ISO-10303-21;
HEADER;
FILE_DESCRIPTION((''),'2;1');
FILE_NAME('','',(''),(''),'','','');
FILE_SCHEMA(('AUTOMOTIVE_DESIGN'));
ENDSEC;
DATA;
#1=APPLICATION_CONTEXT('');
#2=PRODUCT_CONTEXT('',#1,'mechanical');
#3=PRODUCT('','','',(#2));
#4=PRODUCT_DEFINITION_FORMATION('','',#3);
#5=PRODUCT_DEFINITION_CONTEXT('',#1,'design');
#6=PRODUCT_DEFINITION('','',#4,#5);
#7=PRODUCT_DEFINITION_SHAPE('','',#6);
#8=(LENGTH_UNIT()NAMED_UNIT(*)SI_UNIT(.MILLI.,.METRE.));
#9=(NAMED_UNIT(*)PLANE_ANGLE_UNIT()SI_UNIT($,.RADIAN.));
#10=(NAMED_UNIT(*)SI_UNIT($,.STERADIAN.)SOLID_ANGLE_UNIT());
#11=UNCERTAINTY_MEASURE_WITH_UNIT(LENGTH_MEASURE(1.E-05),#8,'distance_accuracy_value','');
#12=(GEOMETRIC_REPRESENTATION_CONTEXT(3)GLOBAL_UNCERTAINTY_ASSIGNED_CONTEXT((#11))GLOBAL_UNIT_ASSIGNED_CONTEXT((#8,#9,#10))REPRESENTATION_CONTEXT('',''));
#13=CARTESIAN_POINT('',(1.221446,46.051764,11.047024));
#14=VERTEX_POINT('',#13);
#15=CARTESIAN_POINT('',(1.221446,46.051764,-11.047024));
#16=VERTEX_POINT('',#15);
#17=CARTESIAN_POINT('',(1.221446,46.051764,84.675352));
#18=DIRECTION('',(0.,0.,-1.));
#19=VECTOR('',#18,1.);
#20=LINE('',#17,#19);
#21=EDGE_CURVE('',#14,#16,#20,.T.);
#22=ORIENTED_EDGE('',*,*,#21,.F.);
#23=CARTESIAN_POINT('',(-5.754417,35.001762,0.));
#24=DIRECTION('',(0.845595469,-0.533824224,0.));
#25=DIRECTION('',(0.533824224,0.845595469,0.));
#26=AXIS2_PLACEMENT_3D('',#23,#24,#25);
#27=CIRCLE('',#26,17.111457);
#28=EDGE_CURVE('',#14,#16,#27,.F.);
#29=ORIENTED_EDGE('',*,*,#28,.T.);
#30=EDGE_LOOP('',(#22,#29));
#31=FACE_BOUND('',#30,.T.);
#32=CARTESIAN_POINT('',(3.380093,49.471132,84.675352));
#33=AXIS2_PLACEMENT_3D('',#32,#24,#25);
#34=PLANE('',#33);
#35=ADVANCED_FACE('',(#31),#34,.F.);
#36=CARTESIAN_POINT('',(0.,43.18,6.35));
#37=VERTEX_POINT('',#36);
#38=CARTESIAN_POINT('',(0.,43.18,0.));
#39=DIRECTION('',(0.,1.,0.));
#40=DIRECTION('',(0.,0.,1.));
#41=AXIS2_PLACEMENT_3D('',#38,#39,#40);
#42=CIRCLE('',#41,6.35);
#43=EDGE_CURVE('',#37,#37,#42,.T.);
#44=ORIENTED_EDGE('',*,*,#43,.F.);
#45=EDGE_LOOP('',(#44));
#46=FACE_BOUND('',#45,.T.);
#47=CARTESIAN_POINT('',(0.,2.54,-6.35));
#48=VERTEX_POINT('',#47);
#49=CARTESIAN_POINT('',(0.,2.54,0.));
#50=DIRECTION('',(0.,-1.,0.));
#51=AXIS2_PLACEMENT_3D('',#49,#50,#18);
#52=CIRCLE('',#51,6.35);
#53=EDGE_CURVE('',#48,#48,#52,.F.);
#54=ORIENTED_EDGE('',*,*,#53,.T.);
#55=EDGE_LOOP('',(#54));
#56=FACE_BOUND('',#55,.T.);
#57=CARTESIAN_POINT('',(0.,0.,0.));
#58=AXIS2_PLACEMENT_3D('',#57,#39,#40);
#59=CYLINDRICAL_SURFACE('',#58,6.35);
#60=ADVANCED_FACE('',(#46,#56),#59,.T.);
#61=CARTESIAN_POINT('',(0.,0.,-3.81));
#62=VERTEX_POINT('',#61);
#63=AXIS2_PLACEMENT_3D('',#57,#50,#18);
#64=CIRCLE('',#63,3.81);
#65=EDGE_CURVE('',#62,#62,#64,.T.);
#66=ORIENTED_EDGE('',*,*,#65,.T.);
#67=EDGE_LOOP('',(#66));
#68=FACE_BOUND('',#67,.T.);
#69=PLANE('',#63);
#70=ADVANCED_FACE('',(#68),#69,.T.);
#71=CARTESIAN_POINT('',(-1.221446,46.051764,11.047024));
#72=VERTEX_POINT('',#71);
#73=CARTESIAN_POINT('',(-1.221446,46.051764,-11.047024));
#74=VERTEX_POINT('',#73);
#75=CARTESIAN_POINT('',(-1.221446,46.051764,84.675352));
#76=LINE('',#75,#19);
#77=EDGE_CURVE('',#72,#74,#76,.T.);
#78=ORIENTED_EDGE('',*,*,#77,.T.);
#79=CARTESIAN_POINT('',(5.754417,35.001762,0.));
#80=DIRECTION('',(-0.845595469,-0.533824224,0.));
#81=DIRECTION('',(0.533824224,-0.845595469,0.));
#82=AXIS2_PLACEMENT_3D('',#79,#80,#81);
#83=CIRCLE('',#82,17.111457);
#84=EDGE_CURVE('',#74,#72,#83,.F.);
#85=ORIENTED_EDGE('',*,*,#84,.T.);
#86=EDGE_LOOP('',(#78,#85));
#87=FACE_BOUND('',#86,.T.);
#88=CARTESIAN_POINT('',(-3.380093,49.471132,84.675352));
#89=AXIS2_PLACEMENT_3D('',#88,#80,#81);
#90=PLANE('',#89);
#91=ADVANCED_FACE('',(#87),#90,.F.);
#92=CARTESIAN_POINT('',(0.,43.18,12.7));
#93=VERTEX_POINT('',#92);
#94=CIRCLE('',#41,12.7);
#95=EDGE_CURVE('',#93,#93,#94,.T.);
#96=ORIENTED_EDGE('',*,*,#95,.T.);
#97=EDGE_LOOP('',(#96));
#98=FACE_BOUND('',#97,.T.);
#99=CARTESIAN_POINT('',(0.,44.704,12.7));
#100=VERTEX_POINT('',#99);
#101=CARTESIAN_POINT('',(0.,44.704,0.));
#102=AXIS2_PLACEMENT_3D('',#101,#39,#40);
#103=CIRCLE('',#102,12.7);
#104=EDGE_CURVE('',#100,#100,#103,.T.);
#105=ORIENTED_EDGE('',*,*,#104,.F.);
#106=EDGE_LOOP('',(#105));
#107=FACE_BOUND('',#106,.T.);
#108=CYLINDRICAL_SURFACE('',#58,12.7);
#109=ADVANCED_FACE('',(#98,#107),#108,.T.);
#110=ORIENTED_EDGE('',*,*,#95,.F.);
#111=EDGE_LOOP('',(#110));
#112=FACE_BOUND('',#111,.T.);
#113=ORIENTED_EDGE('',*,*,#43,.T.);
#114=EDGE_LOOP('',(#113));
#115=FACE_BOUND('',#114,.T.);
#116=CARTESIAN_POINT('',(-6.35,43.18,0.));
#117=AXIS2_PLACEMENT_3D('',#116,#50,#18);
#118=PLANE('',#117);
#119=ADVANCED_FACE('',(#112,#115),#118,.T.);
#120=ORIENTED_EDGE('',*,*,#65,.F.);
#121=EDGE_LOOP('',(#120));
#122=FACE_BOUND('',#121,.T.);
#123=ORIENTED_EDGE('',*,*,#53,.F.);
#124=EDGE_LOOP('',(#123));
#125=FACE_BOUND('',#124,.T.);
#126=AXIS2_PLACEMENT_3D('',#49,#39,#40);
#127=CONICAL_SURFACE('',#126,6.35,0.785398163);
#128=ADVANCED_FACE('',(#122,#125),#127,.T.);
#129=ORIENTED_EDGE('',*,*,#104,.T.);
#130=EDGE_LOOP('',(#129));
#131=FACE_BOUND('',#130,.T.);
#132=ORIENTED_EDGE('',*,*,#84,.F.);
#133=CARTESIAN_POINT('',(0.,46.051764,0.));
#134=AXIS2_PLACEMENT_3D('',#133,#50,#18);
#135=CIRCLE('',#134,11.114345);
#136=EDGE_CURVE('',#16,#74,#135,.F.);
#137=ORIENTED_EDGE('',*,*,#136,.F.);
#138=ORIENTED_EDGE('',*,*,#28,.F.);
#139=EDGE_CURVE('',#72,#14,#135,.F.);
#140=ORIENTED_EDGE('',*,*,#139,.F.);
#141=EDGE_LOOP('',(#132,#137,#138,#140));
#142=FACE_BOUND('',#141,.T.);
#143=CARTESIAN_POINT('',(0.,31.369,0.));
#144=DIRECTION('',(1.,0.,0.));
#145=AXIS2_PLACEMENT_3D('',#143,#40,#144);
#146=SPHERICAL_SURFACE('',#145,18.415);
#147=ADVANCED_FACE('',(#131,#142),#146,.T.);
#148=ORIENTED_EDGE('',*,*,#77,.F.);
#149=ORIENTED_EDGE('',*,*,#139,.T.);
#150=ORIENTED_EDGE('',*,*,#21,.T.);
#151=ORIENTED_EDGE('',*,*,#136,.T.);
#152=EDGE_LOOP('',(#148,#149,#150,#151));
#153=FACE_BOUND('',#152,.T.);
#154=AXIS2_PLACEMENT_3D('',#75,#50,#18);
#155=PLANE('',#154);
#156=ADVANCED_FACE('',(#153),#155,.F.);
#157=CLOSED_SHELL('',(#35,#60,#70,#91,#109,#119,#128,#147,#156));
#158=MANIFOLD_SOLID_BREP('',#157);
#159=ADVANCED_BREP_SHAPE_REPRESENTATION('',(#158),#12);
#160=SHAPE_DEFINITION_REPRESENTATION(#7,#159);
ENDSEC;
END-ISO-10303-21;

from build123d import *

# Parameters (mm, degrees)
CUT_EXTRUDE1_DEPTH      = 53.924726322676435
CUT_EXTRUDE1_DEPTH_BACK = 53.924726322676435
CHAMFER1_SIZE           = 2.54


# Read off the part's stored shape, not the designer's step: Dome1
with BuildPart() as part:
    # Sketch1 → Revolve1 (revolve)
    with BuildSketch(Plane.XY, mode=Mode.PRIVATE) as revolve1_sk:
        Polygon((0, 0), (-6.3500000000000005, 0), (-6.3500000000000005, 43.17999999999999), (-12.700000000000003, 43.17999999999999), (-12.700000000000003, 44.70399999999999), (0, 44.70399999999999), align=None)
    revolve(revolve1_sk.sketch.rotate(Axis((0, 0, 0), (0, -1, 0)), 270), axis=Axis((0, 0, 0), (0, -1, 0)))

    # Dome1 outline → Dome1 (revolve)
    with BuildSketch(Plane.XY):
        with BuildLine():
            Line((0, 44.704), (12.700000013, 44.703999987))
            ThreePointArc((12.700000013, 44.703999987), (6.839159314, 48.466898259), (0, 49.784))
            Line((0, 49.784), (0, 44.704))
        make_face()
    revolve(axis=Axis((0, 0, 0), (0, 1, 0)))

    # Sketch2 → Cut-Extrude1 (cut, two sides: drawn at the far end of the back side and taken through both)
    with BuildSketch(Plane.XY.offset(-CUT_EXTRUDE1_DEPTH_BACK)):
        Polygon((-64.2561959287237, 145.90092038345463), (-3.3800930162397096, 49.47113236614868), (-1.2214464709934951, 46.05176386515196), (1.2214464709934951, 46.05176386515196), (3.3800930162397096, 49.47113236614868), (64.2561959287237, 145.90092038345463), (64.2561959287237, 373.97638090364217), (-64.2561959287237, 373.97638090364217), align=None)
    extrude(amount=CUT_EXTRUDE1_DEPTH + CUT_EXTRUDE1_DEPTH_BACK, mode=Mode.SUBTRACT)

    # Chamfer1
    chamfer1_edges = [part.edges().sort_by_distance(p)[0] for p in [
        (-2.19e-15, 0, -6.3500000000000005),
    ]]
    chamfer(chamfer1_edges, length=CHAMFER1_SIZE)


solid = part.part
